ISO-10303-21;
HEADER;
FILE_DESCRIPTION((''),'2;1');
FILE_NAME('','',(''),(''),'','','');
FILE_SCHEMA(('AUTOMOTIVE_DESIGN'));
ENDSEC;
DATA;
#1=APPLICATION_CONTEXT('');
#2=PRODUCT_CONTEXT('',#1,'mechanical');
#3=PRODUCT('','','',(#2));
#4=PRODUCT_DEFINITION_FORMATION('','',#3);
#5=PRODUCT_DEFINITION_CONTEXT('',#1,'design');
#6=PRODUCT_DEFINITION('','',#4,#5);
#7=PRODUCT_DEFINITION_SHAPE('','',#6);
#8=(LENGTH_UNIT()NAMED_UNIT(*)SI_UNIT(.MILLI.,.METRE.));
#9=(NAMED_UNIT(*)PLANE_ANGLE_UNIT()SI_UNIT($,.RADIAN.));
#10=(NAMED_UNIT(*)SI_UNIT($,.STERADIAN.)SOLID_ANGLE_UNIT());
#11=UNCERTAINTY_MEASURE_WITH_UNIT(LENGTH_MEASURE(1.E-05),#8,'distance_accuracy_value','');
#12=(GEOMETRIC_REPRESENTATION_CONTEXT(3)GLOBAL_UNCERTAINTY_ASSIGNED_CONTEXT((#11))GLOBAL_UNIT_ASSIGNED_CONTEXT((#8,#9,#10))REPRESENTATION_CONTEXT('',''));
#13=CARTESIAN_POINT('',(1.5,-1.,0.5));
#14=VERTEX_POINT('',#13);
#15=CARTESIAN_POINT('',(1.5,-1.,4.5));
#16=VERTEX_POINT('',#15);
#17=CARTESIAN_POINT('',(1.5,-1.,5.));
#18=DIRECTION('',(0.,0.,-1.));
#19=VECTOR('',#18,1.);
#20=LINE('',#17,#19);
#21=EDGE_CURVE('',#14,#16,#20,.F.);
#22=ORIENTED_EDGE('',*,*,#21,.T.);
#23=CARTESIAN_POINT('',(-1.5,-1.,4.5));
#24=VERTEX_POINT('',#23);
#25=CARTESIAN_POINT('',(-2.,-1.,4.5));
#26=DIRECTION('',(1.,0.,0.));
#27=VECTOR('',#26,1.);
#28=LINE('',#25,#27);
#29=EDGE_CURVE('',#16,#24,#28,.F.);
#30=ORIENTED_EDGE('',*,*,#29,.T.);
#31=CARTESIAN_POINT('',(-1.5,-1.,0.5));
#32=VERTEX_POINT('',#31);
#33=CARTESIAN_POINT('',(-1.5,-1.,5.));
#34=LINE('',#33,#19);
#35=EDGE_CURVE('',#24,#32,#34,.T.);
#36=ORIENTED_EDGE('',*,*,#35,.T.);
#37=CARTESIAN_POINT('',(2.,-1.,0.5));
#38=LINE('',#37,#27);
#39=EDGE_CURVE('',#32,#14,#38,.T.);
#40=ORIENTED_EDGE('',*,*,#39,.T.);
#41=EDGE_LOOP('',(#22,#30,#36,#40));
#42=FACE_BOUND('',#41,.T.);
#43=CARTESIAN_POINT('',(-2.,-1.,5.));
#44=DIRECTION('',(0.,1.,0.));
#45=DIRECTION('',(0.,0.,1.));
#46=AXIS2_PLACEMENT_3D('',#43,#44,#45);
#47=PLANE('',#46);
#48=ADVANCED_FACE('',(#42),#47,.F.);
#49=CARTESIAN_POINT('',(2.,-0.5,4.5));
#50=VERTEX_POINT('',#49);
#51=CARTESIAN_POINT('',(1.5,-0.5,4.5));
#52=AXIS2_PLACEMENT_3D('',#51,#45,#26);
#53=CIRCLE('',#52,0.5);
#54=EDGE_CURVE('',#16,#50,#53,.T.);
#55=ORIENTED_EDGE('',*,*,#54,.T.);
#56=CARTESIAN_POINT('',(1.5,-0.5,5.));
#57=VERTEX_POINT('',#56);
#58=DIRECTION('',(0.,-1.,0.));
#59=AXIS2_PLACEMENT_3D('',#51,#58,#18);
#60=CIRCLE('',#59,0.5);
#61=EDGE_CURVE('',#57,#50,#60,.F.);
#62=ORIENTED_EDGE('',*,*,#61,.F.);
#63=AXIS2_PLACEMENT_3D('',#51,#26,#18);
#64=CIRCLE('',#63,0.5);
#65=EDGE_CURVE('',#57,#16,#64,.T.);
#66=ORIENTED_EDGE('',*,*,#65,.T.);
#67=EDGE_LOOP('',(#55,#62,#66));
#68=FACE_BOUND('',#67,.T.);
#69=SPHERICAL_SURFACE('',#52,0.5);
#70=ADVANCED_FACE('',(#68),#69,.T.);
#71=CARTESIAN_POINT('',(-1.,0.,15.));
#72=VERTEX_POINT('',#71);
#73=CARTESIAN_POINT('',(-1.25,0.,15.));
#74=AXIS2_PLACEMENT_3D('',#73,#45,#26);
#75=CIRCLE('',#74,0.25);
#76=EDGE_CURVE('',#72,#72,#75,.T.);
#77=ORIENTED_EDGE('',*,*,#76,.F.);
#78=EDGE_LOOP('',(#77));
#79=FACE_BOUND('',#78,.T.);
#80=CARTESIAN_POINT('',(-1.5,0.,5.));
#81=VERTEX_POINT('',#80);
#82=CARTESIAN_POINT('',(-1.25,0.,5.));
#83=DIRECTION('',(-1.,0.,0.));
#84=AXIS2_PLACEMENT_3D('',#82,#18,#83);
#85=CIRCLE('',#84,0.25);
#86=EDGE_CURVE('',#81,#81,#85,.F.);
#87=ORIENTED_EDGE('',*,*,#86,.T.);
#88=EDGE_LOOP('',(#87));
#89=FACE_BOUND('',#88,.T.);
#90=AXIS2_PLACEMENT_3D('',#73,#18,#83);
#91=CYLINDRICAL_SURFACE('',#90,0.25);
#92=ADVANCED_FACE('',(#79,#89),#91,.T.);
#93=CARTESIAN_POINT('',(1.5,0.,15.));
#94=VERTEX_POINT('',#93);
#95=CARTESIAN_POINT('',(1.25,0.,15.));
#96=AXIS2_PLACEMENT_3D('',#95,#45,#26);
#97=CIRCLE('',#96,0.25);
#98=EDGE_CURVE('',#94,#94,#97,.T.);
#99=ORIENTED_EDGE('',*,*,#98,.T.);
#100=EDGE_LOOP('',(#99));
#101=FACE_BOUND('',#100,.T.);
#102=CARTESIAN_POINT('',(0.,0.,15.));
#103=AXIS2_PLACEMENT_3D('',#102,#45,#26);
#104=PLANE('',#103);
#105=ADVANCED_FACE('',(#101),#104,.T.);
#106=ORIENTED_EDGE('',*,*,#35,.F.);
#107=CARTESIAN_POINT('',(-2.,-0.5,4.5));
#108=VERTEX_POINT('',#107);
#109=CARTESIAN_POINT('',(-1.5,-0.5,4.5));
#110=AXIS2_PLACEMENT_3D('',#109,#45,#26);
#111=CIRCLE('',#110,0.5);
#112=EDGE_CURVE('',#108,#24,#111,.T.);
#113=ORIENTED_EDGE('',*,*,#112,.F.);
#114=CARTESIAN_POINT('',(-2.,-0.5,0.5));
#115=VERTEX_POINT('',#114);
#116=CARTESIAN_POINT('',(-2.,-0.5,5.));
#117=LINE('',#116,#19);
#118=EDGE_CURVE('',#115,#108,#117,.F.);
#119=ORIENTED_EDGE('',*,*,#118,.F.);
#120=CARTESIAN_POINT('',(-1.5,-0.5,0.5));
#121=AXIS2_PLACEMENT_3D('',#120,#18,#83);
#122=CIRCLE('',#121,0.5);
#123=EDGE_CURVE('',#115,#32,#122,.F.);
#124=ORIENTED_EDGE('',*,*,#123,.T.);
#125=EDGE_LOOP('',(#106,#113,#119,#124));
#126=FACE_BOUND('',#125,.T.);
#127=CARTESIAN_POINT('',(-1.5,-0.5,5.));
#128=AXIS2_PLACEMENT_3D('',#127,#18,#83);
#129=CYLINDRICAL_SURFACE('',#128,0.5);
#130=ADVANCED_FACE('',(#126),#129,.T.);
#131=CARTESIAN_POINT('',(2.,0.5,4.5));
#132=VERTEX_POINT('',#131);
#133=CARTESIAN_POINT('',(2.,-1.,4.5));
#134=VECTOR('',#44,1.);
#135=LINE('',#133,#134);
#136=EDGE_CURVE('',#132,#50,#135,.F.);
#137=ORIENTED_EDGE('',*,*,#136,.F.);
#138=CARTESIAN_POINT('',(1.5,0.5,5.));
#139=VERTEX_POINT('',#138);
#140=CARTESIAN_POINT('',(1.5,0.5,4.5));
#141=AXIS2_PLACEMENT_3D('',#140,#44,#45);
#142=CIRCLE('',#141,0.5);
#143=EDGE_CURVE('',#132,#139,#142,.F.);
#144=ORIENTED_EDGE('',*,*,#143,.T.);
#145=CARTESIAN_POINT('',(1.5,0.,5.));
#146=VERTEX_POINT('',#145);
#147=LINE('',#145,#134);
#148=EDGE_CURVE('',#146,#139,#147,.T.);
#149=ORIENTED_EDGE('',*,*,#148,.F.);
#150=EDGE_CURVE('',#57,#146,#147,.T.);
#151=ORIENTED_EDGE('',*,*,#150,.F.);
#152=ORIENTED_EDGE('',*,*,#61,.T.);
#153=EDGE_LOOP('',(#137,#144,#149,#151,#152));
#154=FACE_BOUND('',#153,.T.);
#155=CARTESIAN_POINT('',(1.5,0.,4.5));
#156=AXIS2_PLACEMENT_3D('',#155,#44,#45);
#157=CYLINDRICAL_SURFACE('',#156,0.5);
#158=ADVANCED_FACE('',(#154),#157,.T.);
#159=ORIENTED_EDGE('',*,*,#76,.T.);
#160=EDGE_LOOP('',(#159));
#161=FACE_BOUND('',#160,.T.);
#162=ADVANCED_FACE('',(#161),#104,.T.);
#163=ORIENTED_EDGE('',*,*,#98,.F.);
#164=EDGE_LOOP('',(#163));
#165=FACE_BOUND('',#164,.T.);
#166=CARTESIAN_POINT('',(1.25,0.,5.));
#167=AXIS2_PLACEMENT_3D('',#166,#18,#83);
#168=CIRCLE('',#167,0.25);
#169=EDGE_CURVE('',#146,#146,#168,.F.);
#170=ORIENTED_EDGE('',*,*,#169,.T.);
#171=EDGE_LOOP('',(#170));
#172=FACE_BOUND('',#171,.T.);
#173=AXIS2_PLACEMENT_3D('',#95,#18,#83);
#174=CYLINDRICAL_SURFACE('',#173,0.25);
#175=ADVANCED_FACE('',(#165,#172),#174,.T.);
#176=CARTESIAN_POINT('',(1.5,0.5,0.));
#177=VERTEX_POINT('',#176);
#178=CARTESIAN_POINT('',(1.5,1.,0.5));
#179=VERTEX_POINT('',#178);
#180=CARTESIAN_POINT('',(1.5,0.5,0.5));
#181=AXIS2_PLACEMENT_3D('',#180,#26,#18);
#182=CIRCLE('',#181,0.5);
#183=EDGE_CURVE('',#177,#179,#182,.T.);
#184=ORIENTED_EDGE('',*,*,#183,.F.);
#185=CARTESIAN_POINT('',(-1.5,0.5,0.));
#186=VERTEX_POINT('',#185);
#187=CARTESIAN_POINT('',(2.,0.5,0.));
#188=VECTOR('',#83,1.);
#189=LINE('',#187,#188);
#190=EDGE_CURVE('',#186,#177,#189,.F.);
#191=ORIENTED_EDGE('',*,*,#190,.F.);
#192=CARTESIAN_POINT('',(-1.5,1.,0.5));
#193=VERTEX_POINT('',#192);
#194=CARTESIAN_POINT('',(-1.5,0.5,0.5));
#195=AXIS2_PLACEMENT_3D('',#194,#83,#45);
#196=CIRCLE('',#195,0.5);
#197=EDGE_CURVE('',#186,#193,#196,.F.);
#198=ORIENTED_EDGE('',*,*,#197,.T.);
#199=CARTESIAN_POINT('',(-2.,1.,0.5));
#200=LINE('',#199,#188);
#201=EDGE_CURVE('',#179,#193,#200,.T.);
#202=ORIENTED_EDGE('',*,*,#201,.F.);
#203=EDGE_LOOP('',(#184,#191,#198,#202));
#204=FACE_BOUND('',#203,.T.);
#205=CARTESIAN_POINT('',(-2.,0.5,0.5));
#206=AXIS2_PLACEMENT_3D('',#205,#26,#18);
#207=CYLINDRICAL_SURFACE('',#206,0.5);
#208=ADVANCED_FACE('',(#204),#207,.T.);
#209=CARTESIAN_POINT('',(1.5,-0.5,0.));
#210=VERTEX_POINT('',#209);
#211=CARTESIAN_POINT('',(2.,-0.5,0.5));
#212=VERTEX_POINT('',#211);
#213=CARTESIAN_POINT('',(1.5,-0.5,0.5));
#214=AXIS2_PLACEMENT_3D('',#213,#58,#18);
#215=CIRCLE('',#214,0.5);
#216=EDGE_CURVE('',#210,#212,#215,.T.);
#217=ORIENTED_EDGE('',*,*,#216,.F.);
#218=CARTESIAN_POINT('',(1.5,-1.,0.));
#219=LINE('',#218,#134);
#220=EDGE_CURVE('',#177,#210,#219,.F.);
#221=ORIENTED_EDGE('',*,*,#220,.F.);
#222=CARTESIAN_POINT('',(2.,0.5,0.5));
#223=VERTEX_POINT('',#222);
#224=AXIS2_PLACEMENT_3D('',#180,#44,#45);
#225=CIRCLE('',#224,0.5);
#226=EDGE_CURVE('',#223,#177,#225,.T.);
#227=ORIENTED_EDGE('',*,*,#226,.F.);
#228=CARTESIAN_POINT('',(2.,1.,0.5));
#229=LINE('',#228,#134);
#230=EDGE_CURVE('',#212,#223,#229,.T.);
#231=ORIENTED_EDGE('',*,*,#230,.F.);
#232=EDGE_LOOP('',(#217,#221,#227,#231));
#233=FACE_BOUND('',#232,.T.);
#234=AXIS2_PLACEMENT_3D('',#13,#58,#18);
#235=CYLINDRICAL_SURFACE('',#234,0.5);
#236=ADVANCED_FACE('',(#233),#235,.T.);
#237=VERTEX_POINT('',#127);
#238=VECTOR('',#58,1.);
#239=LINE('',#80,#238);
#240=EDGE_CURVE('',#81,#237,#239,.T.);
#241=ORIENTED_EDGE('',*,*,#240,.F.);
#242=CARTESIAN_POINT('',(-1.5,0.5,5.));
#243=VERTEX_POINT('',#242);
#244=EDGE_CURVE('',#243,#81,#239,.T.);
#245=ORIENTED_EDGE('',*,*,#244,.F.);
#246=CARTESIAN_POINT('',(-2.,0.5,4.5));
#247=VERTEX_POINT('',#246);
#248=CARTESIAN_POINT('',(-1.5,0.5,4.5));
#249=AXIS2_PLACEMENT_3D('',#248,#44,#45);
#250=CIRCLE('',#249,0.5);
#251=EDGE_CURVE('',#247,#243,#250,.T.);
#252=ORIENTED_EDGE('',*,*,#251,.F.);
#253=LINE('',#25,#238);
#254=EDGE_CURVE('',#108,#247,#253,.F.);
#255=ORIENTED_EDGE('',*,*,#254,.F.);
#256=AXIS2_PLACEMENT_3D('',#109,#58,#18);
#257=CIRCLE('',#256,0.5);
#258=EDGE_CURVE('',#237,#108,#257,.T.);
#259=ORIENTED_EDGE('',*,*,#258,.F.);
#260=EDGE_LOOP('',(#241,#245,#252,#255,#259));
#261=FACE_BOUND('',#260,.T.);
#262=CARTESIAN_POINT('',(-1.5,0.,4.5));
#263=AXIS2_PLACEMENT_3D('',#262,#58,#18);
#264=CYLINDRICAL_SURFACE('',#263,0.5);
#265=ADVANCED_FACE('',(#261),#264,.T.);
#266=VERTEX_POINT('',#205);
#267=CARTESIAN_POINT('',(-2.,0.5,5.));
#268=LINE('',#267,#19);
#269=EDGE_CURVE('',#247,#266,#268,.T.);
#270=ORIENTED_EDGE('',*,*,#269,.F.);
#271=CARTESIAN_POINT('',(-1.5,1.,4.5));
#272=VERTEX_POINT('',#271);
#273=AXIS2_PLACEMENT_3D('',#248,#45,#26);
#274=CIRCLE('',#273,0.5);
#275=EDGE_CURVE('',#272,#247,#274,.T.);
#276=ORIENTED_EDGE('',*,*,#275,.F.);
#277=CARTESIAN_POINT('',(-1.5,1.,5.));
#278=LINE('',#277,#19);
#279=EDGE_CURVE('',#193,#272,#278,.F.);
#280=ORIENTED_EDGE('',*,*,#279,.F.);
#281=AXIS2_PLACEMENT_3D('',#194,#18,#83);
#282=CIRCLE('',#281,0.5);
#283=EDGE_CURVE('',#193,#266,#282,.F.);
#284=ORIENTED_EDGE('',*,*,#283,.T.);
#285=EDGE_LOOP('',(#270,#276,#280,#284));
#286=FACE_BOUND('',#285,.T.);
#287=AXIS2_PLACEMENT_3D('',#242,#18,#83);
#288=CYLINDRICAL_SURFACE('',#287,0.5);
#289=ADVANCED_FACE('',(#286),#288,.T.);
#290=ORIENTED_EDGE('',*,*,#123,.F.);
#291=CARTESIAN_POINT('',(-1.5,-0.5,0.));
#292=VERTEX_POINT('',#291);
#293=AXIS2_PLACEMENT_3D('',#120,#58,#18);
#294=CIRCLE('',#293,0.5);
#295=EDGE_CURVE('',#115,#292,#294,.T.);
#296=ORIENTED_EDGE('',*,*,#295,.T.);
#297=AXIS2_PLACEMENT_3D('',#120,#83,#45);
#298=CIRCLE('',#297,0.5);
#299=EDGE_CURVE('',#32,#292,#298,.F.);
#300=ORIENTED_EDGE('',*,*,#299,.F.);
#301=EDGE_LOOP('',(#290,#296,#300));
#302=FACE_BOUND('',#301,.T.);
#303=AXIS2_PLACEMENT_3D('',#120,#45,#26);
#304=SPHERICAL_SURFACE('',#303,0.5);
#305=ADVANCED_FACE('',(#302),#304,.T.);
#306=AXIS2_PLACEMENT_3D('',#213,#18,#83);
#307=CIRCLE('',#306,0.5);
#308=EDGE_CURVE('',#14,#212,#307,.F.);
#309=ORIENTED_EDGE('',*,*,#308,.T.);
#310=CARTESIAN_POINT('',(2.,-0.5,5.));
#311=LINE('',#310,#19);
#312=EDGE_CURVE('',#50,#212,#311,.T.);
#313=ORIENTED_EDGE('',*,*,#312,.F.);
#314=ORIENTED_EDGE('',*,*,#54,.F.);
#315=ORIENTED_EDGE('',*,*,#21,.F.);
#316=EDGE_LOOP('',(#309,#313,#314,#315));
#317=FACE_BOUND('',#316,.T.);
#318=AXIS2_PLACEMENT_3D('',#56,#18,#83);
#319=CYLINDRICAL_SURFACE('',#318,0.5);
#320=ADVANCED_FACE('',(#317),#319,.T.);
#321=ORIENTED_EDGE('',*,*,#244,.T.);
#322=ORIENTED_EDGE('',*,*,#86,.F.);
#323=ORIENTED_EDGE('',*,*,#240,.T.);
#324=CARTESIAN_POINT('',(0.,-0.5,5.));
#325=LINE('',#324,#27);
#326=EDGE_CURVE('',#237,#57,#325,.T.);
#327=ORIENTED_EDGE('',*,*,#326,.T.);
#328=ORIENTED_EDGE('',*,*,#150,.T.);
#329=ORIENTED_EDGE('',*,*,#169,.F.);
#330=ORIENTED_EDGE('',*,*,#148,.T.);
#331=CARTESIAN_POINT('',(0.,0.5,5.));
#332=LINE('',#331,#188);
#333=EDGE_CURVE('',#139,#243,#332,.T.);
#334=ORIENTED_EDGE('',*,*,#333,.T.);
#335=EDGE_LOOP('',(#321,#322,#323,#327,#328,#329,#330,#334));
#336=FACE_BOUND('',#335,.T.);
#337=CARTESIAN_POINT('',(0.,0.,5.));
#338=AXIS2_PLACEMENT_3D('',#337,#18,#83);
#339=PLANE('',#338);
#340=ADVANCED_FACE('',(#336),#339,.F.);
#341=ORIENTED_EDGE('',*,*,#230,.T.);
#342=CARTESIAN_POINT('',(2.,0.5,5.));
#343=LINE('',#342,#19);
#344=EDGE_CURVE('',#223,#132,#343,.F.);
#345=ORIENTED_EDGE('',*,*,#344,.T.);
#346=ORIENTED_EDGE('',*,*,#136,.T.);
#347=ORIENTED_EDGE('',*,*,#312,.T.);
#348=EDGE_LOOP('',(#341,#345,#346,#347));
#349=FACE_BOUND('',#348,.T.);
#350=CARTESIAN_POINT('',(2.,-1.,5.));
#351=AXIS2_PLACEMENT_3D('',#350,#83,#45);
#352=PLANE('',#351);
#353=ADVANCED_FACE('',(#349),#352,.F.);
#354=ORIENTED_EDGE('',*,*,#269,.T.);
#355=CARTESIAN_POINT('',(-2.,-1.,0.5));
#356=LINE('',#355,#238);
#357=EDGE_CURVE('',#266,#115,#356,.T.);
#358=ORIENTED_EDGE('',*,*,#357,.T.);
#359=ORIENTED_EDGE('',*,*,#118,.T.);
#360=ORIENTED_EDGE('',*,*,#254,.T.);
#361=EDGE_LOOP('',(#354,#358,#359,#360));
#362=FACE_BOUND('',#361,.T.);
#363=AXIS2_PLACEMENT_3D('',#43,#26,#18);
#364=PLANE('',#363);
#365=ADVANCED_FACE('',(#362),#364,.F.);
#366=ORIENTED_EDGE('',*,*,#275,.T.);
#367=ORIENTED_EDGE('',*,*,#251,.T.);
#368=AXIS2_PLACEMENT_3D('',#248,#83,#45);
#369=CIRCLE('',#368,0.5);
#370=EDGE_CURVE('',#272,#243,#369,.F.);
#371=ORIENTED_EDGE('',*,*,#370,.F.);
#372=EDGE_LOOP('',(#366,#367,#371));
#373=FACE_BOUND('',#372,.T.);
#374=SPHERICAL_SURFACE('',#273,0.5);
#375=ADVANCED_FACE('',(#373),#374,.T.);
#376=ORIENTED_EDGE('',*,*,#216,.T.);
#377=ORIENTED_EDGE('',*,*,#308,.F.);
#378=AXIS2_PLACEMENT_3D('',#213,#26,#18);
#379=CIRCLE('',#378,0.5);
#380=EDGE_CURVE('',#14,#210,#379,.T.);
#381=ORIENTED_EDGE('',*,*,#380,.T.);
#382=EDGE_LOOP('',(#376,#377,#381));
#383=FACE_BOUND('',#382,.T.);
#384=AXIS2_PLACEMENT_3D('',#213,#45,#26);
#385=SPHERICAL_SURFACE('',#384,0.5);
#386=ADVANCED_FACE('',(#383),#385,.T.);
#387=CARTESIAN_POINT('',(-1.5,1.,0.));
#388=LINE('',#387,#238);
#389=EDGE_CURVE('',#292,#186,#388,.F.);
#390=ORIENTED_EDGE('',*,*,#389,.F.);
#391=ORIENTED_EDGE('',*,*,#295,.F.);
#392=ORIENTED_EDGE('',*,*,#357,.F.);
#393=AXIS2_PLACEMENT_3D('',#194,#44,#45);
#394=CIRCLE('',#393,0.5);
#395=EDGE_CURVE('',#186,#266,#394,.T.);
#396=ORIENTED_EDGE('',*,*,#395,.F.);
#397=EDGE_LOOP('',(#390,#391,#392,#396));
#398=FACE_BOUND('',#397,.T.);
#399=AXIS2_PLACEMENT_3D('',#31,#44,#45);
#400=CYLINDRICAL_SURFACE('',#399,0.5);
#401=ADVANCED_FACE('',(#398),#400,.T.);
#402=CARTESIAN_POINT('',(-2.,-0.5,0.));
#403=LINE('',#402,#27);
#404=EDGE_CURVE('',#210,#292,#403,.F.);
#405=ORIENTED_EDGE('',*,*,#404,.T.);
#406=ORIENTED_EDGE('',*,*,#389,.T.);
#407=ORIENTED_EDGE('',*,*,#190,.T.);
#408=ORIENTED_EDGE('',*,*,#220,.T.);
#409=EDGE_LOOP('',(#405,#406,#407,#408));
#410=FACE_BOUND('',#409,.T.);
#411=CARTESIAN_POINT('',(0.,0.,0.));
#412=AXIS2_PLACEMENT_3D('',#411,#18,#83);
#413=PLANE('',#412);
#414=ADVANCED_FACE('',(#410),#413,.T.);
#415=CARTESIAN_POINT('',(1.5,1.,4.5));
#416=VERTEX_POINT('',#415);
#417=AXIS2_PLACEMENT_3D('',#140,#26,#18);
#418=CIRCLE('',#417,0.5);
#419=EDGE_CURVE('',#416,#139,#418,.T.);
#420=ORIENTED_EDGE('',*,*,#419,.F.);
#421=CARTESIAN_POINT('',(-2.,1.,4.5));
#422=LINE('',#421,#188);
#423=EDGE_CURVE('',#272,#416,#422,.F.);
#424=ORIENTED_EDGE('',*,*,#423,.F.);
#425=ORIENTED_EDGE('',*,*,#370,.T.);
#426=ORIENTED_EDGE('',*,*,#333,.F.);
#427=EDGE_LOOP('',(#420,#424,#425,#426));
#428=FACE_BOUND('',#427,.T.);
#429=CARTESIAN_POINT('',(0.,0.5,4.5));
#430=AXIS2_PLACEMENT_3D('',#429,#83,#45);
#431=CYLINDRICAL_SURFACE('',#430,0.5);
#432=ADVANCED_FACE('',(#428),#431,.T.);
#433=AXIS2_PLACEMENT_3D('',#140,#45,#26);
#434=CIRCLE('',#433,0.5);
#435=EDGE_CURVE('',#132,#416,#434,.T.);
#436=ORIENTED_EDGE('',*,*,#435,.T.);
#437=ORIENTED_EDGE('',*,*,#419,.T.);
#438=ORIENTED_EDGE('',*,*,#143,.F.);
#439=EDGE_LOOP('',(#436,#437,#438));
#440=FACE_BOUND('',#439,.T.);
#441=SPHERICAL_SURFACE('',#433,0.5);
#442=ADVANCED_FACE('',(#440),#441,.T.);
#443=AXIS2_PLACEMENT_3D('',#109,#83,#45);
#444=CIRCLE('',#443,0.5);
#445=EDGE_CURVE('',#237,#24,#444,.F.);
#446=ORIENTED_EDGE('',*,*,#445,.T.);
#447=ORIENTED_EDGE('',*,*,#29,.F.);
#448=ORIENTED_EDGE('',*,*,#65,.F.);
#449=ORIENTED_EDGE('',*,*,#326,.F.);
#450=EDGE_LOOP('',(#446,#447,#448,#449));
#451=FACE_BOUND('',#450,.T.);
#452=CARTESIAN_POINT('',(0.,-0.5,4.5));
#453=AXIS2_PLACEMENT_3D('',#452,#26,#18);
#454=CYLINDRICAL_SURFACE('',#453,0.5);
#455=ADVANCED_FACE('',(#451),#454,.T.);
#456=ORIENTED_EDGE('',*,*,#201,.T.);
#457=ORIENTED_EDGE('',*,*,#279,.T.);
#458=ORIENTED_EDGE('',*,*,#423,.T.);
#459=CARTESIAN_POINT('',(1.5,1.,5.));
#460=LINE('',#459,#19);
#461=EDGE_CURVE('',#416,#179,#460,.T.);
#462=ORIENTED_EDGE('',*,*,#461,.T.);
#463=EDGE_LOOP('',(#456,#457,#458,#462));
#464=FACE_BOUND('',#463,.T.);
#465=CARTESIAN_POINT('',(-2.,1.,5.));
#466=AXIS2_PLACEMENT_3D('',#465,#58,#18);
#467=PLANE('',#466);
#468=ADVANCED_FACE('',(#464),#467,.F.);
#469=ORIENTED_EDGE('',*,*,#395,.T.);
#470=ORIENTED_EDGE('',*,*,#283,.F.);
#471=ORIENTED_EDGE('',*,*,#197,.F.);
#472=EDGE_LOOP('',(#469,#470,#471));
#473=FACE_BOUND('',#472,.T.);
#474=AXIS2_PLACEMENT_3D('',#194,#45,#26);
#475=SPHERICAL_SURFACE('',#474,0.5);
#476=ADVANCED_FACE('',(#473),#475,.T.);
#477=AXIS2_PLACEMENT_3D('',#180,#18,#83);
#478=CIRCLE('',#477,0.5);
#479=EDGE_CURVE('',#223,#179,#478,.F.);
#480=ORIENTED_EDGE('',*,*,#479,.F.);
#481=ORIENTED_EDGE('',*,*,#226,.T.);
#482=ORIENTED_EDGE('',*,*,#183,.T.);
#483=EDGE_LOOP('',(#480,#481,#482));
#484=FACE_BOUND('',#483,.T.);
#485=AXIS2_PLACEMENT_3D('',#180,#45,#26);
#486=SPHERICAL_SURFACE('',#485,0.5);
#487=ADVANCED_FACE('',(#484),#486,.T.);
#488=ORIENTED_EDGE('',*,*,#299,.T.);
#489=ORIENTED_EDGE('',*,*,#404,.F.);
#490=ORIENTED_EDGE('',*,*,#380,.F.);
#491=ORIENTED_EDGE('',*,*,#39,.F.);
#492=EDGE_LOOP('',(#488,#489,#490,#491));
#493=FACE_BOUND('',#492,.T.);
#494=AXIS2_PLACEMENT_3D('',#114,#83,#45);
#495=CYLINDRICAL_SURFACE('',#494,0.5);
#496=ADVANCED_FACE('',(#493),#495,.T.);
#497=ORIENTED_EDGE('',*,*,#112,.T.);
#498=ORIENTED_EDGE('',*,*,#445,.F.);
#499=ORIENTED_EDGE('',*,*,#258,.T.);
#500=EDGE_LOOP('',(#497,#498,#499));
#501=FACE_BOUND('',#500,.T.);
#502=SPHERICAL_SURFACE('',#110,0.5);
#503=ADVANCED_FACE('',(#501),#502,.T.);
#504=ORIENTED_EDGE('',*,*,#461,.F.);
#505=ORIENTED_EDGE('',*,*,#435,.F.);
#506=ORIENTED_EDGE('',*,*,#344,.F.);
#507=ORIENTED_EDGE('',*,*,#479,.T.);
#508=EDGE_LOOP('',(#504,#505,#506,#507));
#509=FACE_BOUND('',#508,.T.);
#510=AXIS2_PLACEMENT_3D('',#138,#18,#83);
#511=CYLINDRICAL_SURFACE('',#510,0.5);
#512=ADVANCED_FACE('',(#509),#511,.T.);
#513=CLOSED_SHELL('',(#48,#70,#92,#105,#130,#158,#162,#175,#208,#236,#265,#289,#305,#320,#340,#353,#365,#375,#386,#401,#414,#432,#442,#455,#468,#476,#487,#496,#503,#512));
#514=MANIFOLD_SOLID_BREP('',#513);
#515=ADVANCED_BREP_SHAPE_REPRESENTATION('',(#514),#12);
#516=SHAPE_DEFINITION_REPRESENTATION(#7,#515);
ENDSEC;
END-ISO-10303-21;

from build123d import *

# Parameters (mm, degrees)
SKETCH1_W           = 4
SKETCH1_H           = 2
BOSS_EXTRUDE1_DEPTH = 5
SKETCH2_R           = 0.25
BOSS_EXTRUDE2_DEPTH = 10
FILLET1_R           = 0.5


with BuildPart() as part:
    # Sketch1 → Boss-Extrude1 (new body)
    with BuildSketch(Plane.XY):
        Rectangle(SKETCH1_W, SKETCH1_H)
    extrude(amount=BOSS_EXTRUDE1_DEPTH)

    # Sketch2 → Boss-Extrude2 (add)
    with BuildSketch(Plane.XY.offset(5)):
        with Locations(Location((-1.25, 0, 0), (0, 0, 180))):
            Circle(SKETCH2_R)
        with Locations(Location((1.25, 0, 0), (0, 0, 180))):
            Circle(SKETCH2_R)
    extrude(amount=BOSS_EXTRUDE2_DEPTH)

    # Fillet1
    fillet1_edges = [part.edges().sort_by_distance(p)[0] for p in [
        (-2, 0, 5),
        (0, -1, 5),
        (2, 0, 5),
        (0, -1, 0),
        (-2, 0, 0),
        (0, 1, 0),
        (2, 0, 0),
        (0, 1, 5),
        (2, -1, 2.5),
        (-2, -1, 2.5),
        (-2, 1, 2.5),
        (2, 1, 2.5),
    ]]
    fillet(fillet1_edges, radius=FILLET1_R - 0.0001)  # a hair under: the kernel refuses the full size


solid = part.part
